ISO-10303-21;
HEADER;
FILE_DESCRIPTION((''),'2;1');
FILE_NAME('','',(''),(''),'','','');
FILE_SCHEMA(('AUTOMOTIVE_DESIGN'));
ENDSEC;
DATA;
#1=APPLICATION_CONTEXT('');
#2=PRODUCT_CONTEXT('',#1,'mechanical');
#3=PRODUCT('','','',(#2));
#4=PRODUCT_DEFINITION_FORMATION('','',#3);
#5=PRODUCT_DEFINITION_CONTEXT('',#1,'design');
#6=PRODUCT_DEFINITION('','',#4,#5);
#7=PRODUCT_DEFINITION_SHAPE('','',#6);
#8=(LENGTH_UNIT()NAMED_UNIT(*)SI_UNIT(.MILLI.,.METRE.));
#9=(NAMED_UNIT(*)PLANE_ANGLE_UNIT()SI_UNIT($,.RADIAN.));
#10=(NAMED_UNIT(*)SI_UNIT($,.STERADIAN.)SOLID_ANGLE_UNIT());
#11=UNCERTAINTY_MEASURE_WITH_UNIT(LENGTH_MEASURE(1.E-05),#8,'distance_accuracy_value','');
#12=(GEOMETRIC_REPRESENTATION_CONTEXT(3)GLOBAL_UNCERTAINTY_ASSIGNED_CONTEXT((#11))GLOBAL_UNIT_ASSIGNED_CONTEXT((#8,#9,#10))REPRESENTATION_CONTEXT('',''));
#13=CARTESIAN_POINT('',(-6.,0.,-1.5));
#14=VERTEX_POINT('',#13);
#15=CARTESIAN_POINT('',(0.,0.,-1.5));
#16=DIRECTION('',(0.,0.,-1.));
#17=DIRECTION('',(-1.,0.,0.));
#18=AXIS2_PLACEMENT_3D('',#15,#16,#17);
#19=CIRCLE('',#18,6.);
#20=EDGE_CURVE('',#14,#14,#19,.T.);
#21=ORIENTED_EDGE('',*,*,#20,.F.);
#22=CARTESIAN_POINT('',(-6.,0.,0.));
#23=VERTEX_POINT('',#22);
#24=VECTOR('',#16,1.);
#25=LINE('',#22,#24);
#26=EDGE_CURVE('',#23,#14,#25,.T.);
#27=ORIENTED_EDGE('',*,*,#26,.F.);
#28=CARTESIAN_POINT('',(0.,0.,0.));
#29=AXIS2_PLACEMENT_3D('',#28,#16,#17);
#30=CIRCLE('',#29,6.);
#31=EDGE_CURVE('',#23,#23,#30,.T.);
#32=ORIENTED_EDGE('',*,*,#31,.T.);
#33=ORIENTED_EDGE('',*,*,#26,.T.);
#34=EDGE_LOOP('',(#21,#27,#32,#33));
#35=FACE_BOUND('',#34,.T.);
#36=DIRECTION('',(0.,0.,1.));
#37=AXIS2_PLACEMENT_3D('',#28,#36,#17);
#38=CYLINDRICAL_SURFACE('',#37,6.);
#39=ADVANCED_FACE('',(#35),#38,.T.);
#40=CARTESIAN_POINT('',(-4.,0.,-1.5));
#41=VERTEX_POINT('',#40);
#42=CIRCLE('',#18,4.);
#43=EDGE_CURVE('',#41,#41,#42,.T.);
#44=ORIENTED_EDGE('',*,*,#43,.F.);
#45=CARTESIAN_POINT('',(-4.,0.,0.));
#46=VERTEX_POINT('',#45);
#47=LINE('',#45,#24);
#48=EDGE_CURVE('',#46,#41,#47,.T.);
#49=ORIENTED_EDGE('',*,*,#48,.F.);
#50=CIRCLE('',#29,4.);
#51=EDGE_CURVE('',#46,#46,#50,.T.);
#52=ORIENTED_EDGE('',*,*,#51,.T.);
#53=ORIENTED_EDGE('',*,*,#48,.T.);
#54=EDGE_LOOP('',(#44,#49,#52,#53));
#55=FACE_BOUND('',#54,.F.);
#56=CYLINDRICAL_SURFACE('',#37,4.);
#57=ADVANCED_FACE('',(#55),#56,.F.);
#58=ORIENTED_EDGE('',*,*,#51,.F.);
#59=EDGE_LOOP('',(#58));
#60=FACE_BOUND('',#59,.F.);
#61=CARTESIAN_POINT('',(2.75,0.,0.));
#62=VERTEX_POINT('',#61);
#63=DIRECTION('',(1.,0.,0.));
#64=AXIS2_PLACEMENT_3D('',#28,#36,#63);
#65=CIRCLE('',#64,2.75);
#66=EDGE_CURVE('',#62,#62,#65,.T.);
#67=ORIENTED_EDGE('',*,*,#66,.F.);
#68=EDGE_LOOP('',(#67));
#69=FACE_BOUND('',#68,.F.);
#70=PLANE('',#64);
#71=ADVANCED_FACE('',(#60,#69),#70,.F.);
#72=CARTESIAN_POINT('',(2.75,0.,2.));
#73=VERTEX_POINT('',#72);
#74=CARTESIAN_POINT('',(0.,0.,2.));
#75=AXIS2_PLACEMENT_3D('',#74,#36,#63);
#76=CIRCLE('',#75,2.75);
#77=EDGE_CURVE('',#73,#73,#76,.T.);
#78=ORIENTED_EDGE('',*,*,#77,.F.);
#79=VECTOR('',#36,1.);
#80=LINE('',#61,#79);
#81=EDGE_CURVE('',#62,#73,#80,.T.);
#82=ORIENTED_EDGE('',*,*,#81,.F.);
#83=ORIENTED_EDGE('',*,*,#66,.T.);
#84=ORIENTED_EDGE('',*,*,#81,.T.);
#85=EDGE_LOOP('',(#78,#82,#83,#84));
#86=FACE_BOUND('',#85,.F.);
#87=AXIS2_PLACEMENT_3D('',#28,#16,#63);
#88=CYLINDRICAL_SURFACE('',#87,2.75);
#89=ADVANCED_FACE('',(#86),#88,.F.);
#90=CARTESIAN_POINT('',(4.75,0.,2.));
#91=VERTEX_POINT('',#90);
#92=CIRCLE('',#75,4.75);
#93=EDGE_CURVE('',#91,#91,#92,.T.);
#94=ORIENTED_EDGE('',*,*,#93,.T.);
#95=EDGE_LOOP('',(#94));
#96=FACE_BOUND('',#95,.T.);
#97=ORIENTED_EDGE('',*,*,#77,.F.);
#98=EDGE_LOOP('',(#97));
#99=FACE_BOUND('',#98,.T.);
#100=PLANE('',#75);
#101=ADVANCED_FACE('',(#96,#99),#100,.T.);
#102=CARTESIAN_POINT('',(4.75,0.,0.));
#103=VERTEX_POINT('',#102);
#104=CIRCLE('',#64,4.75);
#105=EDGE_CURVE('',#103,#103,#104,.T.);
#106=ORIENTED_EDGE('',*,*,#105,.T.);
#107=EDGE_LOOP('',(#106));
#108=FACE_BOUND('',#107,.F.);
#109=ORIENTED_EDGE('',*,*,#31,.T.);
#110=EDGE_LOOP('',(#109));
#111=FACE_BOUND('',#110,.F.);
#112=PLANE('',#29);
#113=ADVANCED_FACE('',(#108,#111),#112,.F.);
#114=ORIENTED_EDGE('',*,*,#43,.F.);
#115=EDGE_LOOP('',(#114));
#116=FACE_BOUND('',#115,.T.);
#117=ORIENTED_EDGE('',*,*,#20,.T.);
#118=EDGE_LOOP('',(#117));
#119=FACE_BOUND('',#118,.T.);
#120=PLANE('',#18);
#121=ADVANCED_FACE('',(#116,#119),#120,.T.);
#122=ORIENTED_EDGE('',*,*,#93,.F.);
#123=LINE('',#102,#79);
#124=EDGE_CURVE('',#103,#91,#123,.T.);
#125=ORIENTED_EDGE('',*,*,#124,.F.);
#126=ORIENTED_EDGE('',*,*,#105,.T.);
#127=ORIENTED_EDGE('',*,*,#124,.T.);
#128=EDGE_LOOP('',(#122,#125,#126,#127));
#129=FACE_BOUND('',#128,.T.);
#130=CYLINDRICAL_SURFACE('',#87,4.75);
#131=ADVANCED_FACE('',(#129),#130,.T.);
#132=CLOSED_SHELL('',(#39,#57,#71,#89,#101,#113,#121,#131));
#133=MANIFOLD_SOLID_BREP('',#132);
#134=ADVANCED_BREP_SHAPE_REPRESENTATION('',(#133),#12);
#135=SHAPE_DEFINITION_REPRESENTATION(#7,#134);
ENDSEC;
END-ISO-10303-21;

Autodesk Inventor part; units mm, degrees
ref_plane "YZ Plane" through (0, 0, 0) normal (1, 0, 0) x (0, 1, 0)
ref_plane "XZ Plane" through (0, 0, 0) normal (0, 1, 0) x (-1, 0, 0)
ref_plane "XY Plane" through (0, 0, 0) normal (0, 0, 1) x (1, 0, 0)
sketch "Sketch1" plane through (0, 0, 0) normal (0, 0, 1) x (1, 0, 0)
  circle A0 centre (0, 0) radius 2.75
  circle A1 centre (0, 0) radius 4.75
  dimension "d0" = 5.5
  dimension "d1" = 2
extrude "Extrusion1" add sketch "Sketch1" along normal blind 2
sketch "Sketch2" plane through (0, 0, 0) normal (0, 0, -1) x (-1, 0, 0)
  circle A0 centre (0, 0) radius 4.75 projected
  circle A1 centre (0, 0) radius 4
  circle A2 centre (0, 0) radius 6
  dimension "d4" = 8
  dimension "d5" = 2
extrude "Extrusion2" add sketch "Sketch2" along normal blind 1.5 contours A0 | A2
properties part number "ArmBaseEncoderAlignmentFlange"
